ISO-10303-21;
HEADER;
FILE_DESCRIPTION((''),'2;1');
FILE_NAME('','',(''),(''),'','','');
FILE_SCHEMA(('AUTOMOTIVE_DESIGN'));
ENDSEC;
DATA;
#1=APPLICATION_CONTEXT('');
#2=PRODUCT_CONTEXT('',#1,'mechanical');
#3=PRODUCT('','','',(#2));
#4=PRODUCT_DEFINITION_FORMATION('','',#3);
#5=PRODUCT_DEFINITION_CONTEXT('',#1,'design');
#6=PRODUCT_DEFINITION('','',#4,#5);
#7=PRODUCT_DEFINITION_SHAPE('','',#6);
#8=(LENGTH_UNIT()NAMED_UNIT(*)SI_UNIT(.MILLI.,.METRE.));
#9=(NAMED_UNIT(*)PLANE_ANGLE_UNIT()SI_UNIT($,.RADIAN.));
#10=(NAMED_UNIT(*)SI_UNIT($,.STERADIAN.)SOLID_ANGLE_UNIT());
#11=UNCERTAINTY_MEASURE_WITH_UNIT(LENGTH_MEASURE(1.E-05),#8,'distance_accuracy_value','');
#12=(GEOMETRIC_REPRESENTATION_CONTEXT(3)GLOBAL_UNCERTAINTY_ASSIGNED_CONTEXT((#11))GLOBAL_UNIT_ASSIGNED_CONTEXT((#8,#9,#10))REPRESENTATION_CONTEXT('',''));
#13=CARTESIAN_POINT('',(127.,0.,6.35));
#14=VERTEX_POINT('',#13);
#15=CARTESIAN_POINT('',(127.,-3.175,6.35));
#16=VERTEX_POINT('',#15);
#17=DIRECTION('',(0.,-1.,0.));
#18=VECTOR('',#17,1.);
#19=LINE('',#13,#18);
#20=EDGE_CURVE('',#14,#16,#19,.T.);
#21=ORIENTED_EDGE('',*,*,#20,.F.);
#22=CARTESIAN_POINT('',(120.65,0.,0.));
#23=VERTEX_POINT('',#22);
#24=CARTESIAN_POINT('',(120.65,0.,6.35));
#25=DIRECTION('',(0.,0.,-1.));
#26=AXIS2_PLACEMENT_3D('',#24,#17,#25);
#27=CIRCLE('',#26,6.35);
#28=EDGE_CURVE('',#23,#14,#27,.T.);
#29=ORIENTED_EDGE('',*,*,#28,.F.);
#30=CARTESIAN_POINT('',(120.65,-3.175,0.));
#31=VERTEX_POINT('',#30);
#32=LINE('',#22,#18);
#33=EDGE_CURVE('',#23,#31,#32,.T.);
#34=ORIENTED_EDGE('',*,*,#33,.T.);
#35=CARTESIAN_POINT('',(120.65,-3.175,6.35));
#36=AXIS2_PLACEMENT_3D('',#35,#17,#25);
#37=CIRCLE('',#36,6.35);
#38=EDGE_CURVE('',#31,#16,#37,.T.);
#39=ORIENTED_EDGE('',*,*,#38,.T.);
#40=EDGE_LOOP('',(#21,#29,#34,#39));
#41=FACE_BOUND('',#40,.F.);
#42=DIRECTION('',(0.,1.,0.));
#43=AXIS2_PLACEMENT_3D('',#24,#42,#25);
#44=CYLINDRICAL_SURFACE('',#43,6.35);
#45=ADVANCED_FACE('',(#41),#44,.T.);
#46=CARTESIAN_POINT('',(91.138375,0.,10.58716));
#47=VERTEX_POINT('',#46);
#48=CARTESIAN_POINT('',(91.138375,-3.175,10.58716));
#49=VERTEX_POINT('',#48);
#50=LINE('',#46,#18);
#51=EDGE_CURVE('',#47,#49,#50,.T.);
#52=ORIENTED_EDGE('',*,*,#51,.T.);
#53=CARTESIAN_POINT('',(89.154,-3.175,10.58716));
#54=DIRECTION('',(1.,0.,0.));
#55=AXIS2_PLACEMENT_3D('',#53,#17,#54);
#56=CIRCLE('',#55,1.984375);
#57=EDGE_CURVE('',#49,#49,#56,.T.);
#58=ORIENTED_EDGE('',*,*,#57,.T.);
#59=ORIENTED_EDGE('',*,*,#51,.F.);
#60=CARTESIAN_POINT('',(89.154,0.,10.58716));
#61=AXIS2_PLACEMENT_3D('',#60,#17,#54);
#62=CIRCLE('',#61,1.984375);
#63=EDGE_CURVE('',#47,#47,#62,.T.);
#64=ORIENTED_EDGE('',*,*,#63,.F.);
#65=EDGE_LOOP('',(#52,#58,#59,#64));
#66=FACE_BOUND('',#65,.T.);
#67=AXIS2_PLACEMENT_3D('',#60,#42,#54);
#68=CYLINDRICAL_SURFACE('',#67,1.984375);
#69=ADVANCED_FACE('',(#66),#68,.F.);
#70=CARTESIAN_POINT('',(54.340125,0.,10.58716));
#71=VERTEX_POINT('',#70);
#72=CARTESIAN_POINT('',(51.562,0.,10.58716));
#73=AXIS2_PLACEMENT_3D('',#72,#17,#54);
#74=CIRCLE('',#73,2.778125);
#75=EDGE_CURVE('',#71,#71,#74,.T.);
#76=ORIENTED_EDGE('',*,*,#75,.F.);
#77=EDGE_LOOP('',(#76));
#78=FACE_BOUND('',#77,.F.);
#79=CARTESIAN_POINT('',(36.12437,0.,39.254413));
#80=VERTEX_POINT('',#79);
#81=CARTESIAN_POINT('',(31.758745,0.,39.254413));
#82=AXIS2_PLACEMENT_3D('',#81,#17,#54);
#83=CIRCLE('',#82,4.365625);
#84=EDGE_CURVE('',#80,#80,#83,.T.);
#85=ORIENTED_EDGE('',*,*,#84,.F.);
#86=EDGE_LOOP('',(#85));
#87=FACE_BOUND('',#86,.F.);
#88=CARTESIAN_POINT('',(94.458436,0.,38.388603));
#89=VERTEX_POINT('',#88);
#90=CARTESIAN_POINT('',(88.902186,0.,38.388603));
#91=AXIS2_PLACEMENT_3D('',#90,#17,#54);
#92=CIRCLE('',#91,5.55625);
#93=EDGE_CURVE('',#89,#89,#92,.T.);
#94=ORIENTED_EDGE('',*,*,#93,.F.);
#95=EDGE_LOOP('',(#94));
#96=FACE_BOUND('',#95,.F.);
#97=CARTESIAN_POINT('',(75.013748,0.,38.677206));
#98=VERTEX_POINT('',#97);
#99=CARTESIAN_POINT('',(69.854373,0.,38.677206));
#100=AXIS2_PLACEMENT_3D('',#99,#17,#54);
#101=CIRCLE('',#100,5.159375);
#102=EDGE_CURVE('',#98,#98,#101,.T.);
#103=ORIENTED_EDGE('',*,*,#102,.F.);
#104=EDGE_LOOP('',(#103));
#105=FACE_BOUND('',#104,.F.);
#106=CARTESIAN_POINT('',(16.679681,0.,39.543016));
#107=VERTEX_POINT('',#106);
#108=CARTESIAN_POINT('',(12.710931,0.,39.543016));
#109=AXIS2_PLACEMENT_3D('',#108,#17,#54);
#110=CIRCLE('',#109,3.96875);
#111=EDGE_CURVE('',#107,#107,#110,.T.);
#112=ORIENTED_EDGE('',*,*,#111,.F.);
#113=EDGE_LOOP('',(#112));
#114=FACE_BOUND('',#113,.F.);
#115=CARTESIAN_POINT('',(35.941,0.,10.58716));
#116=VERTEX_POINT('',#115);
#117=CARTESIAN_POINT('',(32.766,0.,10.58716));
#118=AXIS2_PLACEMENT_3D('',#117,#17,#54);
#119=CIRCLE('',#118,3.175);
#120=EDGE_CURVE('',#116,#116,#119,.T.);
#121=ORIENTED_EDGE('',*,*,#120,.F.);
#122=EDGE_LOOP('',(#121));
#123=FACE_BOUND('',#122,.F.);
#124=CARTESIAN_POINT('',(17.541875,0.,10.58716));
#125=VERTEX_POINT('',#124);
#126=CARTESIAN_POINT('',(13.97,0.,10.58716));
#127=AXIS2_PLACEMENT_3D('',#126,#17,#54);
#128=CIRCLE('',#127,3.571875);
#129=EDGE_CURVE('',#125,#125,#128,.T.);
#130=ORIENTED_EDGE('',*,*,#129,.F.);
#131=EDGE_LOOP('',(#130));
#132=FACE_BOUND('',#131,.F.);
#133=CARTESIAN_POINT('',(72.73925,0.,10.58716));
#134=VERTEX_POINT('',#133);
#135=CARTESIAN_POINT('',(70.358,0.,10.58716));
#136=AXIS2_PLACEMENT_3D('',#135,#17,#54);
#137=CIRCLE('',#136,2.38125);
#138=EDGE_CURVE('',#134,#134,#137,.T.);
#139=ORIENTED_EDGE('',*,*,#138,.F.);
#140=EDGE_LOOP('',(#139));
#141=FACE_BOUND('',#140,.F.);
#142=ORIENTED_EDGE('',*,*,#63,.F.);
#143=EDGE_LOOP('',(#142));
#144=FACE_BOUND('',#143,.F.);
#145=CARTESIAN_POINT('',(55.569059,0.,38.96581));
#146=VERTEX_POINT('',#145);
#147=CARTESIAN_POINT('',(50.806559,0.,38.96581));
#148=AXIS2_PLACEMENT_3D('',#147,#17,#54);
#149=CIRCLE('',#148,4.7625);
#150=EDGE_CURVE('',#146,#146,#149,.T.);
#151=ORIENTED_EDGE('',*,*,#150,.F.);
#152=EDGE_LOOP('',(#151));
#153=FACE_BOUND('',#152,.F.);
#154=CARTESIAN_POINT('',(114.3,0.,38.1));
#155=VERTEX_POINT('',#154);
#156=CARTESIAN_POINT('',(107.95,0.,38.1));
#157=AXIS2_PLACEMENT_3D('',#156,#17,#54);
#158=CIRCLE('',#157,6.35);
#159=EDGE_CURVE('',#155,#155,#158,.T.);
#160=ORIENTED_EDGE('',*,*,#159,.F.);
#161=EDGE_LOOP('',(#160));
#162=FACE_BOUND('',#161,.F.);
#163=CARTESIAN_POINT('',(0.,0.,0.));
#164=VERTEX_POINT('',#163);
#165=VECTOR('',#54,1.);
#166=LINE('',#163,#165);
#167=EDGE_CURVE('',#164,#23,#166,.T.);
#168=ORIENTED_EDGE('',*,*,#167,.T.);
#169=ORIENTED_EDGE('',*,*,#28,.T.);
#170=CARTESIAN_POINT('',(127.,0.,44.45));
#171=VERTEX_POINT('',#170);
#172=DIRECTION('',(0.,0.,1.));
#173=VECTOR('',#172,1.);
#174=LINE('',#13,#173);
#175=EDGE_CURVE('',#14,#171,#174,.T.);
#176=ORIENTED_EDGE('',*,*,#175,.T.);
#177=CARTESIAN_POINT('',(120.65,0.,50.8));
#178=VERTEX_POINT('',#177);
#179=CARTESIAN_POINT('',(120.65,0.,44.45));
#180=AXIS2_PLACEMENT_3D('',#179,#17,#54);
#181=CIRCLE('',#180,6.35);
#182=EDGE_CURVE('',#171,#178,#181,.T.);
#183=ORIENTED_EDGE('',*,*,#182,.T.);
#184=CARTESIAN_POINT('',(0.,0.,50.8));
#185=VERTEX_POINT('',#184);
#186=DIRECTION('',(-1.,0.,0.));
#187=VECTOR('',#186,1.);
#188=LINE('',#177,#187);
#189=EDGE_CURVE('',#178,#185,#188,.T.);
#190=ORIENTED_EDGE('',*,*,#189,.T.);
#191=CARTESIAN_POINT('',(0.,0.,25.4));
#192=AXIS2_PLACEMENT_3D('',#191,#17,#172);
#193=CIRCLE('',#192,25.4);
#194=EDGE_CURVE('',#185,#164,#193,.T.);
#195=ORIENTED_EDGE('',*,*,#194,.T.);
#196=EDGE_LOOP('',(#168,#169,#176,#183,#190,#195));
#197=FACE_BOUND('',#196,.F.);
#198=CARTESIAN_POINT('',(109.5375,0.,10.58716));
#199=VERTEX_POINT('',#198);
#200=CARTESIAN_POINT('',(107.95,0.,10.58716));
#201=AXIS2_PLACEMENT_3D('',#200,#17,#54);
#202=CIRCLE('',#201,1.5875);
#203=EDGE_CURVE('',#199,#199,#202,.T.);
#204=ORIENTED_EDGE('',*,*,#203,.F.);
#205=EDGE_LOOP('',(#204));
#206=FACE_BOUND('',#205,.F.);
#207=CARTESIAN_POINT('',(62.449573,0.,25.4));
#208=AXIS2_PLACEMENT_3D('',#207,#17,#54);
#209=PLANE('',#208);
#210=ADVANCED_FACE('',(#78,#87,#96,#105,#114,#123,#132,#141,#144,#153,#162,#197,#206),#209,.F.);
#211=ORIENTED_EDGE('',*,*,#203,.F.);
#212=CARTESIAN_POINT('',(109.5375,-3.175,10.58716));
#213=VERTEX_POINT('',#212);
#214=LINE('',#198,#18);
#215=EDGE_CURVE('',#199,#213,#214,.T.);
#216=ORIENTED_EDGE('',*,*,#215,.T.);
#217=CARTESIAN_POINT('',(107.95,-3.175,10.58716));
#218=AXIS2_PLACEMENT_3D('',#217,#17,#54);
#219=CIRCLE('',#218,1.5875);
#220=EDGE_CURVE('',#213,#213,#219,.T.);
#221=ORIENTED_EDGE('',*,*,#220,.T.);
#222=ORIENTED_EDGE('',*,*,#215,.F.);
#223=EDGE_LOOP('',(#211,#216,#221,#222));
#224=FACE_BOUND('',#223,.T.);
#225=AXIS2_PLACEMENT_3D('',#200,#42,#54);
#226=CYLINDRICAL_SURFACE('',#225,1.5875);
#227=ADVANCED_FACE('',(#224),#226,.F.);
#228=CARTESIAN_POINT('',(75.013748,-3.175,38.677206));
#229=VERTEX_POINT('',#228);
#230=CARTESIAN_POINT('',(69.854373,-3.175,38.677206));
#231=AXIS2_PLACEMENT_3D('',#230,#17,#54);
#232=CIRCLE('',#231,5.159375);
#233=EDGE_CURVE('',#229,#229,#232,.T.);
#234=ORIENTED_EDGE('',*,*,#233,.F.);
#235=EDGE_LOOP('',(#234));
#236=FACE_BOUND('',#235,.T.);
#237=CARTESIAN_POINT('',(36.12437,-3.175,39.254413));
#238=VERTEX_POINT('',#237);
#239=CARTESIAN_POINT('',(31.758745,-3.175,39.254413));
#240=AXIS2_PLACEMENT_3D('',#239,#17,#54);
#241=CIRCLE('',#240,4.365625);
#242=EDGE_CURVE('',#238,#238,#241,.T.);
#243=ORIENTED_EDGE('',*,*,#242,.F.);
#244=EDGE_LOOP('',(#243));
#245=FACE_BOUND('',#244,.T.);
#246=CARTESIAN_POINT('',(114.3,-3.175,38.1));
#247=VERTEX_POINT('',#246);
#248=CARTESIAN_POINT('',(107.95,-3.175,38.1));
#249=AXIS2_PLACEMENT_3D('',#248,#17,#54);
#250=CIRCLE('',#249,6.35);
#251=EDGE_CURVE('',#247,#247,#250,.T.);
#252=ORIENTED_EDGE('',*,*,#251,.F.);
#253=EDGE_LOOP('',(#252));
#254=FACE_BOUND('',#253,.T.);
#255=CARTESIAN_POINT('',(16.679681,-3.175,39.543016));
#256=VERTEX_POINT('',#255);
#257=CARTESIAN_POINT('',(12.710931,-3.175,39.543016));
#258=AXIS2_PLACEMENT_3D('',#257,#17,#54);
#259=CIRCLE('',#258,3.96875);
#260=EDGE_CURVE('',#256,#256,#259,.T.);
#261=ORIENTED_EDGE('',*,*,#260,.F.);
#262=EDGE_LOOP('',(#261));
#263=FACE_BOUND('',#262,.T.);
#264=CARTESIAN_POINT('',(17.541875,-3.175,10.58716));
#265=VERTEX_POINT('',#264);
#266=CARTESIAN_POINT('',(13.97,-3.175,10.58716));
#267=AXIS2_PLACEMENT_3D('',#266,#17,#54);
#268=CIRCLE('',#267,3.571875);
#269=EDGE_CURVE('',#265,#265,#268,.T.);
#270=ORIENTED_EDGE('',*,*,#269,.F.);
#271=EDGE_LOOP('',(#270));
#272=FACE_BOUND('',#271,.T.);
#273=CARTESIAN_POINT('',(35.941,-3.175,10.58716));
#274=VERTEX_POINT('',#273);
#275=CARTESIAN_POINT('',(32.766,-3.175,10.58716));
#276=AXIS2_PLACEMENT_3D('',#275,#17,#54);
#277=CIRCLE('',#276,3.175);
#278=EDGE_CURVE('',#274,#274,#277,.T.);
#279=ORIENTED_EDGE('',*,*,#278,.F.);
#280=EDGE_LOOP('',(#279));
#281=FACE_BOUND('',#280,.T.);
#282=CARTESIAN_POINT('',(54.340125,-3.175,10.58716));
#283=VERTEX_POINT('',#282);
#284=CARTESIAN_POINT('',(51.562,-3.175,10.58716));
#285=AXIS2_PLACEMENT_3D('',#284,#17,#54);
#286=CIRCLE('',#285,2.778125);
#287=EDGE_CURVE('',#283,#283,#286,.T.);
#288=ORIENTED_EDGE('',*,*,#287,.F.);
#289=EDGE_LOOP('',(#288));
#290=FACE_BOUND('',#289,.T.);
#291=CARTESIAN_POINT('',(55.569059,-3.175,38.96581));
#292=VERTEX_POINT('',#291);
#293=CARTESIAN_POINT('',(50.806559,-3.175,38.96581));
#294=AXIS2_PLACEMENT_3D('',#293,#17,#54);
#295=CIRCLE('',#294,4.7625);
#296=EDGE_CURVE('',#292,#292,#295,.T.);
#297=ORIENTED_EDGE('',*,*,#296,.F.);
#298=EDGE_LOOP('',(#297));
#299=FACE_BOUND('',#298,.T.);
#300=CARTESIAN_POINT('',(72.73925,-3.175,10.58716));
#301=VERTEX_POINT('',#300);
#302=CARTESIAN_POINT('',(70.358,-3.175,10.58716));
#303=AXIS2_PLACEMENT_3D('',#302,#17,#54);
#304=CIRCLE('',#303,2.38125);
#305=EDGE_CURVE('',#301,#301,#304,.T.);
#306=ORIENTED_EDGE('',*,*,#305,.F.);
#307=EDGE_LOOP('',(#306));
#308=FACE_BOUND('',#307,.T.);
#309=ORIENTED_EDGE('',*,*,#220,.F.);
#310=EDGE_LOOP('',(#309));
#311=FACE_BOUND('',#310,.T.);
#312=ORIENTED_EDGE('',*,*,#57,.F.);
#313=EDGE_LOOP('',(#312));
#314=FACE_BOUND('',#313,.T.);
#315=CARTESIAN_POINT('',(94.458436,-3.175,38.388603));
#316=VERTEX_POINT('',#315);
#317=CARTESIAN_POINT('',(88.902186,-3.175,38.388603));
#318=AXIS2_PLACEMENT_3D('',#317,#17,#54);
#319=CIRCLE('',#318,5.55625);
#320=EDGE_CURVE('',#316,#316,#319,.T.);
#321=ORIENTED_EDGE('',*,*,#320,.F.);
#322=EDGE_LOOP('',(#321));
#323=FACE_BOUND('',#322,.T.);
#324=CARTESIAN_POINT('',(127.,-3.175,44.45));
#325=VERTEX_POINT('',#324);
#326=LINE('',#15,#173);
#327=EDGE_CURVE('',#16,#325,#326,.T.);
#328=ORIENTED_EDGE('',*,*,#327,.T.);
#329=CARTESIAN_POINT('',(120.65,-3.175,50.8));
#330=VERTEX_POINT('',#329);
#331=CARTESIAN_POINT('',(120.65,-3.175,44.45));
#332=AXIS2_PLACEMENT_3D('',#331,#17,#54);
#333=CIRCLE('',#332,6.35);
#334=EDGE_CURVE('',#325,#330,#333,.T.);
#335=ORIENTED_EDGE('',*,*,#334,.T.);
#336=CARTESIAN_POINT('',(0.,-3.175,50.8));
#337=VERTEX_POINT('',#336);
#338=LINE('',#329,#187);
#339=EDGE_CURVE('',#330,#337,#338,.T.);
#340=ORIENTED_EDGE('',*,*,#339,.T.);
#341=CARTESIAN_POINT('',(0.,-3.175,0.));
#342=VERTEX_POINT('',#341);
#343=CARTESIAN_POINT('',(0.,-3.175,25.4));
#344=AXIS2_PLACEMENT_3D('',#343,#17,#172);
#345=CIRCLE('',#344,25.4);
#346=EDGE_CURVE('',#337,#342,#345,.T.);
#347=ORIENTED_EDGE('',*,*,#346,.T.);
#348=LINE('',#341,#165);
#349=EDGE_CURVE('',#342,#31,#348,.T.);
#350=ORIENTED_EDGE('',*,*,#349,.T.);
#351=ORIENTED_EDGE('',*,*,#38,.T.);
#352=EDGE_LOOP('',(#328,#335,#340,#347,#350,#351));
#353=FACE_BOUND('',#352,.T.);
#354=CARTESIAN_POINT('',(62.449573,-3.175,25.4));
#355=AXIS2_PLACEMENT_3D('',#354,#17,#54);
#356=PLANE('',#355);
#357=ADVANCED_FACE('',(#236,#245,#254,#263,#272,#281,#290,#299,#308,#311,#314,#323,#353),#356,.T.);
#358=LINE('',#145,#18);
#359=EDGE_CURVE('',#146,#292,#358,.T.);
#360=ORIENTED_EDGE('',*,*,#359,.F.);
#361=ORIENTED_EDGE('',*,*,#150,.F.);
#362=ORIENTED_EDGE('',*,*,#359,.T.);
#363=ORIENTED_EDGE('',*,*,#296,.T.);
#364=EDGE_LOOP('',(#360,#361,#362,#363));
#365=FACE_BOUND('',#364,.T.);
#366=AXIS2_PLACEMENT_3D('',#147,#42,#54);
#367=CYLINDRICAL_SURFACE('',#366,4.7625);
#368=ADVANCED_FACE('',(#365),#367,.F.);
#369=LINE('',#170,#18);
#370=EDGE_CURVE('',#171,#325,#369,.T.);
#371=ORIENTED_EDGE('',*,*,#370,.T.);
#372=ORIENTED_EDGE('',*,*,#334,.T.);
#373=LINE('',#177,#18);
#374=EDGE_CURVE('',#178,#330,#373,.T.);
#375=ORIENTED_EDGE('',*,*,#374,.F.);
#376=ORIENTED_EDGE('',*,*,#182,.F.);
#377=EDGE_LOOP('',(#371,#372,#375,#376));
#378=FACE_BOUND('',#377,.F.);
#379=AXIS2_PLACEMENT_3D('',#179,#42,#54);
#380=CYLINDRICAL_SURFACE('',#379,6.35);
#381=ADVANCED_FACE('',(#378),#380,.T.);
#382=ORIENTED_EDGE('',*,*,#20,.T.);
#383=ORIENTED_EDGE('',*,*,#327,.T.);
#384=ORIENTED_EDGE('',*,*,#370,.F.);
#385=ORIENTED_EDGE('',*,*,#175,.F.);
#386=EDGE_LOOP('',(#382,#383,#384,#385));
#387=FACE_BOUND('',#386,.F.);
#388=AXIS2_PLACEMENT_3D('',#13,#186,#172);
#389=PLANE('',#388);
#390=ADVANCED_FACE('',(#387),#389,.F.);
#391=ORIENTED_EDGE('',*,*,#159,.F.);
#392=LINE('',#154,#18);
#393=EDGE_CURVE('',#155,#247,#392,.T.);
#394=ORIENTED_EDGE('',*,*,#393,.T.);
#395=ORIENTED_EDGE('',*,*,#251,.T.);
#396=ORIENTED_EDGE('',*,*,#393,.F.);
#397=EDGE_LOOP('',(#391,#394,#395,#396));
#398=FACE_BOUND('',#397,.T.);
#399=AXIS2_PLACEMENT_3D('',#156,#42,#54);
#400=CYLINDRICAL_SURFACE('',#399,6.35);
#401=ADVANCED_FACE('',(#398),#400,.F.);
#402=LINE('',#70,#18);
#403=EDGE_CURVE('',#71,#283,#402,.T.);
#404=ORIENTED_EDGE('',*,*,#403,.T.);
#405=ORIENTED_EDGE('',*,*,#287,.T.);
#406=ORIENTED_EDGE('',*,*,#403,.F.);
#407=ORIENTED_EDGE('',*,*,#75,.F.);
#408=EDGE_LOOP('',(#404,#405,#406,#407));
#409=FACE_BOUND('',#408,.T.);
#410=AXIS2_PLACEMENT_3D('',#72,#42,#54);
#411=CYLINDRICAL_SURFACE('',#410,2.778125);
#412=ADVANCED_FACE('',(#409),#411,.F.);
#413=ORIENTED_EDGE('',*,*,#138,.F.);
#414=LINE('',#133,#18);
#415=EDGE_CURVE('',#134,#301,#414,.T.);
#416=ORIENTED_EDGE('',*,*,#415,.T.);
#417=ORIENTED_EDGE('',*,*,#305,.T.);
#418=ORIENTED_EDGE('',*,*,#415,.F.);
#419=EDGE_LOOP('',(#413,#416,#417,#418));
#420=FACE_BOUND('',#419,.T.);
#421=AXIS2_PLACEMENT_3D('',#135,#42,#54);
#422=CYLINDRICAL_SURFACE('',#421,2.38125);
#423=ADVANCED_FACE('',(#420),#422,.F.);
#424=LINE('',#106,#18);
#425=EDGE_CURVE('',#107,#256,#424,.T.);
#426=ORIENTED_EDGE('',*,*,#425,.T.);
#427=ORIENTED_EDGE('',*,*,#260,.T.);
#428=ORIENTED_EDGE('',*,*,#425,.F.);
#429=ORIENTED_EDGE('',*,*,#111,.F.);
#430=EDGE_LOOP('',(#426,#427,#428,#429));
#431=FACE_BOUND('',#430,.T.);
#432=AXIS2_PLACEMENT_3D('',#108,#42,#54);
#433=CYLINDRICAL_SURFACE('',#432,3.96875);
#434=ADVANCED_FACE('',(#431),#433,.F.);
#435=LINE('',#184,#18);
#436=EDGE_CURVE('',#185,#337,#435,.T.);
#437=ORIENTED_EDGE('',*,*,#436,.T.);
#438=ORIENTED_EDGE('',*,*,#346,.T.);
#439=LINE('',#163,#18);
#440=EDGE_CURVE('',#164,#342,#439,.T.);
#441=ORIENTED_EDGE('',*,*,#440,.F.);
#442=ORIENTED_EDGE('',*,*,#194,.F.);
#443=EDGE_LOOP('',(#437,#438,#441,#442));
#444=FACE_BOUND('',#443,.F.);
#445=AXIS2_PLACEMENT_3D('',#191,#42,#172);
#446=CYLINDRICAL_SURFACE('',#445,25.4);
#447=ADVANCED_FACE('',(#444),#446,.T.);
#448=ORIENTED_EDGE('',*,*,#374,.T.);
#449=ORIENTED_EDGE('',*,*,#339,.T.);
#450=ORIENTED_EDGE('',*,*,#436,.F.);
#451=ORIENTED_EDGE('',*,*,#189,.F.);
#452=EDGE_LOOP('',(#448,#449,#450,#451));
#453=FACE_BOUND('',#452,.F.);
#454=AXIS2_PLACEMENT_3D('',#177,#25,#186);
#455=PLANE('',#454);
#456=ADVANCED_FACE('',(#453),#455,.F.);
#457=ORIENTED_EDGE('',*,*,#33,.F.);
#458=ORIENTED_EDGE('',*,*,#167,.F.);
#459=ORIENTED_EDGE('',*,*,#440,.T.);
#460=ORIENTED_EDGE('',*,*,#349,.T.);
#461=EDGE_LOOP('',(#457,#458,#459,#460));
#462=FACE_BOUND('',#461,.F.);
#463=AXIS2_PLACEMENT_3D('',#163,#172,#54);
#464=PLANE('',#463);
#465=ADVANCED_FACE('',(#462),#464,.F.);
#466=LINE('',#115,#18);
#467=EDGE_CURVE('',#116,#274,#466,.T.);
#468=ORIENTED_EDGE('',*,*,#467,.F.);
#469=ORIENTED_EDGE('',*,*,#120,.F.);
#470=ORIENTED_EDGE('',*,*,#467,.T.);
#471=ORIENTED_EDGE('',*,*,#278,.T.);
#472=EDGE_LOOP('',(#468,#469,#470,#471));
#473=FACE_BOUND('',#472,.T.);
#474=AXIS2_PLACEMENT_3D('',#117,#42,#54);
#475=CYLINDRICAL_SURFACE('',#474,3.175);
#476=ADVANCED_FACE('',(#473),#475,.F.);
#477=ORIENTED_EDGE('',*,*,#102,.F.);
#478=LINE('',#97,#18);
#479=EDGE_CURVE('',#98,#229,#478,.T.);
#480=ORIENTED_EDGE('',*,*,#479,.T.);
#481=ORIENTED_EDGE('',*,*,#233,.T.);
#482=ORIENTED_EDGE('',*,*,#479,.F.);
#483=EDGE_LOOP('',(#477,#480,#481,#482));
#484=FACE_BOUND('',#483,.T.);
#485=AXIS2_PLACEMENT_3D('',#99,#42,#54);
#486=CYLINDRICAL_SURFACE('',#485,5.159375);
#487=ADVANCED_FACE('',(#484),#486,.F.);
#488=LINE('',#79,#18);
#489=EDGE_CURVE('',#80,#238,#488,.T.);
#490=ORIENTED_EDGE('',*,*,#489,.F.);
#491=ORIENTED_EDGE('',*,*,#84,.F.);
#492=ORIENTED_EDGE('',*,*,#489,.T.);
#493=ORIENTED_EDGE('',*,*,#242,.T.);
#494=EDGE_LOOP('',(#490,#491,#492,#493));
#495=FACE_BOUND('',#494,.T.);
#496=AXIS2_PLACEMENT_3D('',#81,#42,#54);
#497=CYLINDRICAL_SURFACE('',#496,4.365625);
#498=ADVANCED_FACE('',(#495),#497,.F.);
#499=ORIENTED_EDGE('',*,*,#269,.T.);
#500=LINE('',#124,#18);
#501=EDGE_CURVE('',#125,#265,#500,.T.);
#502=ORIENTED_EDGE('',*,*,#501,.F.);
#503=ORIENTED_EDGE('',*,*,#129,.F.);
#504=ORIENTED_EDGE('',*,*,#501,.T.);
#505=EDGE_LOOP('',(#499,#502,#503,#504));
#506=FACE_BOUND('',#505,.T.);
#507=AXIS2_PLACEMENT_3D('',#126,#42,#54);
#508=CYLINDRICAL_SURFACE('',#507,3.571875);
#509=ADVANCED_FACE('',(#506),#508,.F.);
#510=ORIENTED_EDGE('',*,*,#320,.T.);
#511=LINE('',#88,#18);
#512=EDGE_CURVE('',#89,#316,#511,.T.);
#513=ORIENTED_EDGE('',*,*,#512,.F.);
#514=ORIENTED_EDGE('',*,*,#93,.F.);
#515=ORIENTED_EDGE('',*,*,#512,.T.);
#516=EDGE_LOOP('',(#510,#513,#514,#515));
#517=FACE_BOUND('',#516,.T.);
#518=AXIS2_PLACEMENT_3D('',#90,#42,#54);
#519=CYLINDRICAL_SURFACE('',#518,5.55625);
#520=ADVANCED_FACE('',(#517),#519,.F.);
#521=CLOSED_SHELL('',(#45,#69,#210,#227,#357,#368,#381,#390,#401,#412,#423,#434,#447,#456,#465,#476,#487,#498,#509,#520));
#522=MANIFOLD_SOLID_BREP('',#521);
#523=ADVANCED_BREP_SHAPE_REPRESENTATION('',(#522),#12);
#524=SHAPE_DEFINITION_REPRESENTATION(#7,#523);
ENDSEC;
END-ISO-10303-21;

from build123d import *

# Parameters (mm, degrees)
F0_R     = 3.571875
F0_R_2   = 3.175
F0_R_3   = 2.778125
F0_R_4   = 2.38125
F0_R_5   = 1.984375
F0_R_6   = 1.5875
F0_R_7   = 3.96875
F0_R_8   = 4.365625
F0_R_9   = 4.7625
F0_R_10  = 5.159375
F0_R_11  = 5.55625
F0_R_12  = 6.35
F1_DEPTH = 3.175


# Not quite as in the source:
# - a length typed as a fraction of an inch, garbled in the dataset ("3 / 203.2 mm" for 3/8 in), is restored


with BuildPart() as f1:
    # F0 (on Front) → F1 (new body)
    with BuildSketch(Plane.XZ):
        with BuildLine():
            Line((0, 50.8), (0, 0))
            Line((0, 0), (120.65, 0))
            ThreePointArc((120.65, 0), (125.1401280605, 1.8598719395), (127, 6.35))
            Line((127, 6.35), (127, 44.45))
            ThreePointArc((127, 44.45), (125.1401280605, 48.9401280605), (120.65, 50.8))
            Line((120.65, 50.8), (0, 50.8))
        make_face()
        with Locations((13.97, 10.5871595442)):
            Circle(F0_R, mode=Mode.SUBTRACT)
        with Locations((32.766, 10.5871595442)):
            Circle(F0_R_2, mode=Mode.SUBTRACT)
        with Locations((51.562, 10.5871595442)):
            Circle(F0_R_3, mode=Mode.SUBTRACT)
        with Locations((70.358, 10.5871595442)):
            Circle(F0_R_4, mode=Mode.SUBTRACT)
        with Locations((89.154, 10.5871595442)):
            Circle(F0_R_5, mode=Mode.SUBTRACT)
        with Locations((107.95, 10.5871595442)):
            Circle(F0_R_6, mode=Mode.SUBTRACT)
        with Locations((12.7109313135, 39.5430161922)):
            Circle(F0_R_7, mode=Mode.SUBTRACT)
        with Locations((31.7587450508, 39.2544129538)):
            Circle(F0_R_8, mode=Mode.SUBTRACT)
        with Locations((50.8065587881, 38.9658097153)):
            Circle(F0_R_9, mode=Mode.SUBTRACT)
        with Locations((69.8543725254, 38.6772064769)):
            Circle(F0_R_10, mode=Mode.SUBTRACT)
        with Locations((88.9021862627, 38.3886032384)):
            Circle(F0_R_11, mode=Mode.SUBTRACT)
        with Locations((107.95, 38.1)):
            Circle(F0_R_12, mode=Mode.SUBTRACT)
        with BuildLine():
            ThreePointArc((0, 50.8), (-25.4, 25.4), (0, 0))
            Line((0, 0), (0, 50.8))
        make_face()
    extrude(amount=F1_DEPTH)


solid = f1.part
